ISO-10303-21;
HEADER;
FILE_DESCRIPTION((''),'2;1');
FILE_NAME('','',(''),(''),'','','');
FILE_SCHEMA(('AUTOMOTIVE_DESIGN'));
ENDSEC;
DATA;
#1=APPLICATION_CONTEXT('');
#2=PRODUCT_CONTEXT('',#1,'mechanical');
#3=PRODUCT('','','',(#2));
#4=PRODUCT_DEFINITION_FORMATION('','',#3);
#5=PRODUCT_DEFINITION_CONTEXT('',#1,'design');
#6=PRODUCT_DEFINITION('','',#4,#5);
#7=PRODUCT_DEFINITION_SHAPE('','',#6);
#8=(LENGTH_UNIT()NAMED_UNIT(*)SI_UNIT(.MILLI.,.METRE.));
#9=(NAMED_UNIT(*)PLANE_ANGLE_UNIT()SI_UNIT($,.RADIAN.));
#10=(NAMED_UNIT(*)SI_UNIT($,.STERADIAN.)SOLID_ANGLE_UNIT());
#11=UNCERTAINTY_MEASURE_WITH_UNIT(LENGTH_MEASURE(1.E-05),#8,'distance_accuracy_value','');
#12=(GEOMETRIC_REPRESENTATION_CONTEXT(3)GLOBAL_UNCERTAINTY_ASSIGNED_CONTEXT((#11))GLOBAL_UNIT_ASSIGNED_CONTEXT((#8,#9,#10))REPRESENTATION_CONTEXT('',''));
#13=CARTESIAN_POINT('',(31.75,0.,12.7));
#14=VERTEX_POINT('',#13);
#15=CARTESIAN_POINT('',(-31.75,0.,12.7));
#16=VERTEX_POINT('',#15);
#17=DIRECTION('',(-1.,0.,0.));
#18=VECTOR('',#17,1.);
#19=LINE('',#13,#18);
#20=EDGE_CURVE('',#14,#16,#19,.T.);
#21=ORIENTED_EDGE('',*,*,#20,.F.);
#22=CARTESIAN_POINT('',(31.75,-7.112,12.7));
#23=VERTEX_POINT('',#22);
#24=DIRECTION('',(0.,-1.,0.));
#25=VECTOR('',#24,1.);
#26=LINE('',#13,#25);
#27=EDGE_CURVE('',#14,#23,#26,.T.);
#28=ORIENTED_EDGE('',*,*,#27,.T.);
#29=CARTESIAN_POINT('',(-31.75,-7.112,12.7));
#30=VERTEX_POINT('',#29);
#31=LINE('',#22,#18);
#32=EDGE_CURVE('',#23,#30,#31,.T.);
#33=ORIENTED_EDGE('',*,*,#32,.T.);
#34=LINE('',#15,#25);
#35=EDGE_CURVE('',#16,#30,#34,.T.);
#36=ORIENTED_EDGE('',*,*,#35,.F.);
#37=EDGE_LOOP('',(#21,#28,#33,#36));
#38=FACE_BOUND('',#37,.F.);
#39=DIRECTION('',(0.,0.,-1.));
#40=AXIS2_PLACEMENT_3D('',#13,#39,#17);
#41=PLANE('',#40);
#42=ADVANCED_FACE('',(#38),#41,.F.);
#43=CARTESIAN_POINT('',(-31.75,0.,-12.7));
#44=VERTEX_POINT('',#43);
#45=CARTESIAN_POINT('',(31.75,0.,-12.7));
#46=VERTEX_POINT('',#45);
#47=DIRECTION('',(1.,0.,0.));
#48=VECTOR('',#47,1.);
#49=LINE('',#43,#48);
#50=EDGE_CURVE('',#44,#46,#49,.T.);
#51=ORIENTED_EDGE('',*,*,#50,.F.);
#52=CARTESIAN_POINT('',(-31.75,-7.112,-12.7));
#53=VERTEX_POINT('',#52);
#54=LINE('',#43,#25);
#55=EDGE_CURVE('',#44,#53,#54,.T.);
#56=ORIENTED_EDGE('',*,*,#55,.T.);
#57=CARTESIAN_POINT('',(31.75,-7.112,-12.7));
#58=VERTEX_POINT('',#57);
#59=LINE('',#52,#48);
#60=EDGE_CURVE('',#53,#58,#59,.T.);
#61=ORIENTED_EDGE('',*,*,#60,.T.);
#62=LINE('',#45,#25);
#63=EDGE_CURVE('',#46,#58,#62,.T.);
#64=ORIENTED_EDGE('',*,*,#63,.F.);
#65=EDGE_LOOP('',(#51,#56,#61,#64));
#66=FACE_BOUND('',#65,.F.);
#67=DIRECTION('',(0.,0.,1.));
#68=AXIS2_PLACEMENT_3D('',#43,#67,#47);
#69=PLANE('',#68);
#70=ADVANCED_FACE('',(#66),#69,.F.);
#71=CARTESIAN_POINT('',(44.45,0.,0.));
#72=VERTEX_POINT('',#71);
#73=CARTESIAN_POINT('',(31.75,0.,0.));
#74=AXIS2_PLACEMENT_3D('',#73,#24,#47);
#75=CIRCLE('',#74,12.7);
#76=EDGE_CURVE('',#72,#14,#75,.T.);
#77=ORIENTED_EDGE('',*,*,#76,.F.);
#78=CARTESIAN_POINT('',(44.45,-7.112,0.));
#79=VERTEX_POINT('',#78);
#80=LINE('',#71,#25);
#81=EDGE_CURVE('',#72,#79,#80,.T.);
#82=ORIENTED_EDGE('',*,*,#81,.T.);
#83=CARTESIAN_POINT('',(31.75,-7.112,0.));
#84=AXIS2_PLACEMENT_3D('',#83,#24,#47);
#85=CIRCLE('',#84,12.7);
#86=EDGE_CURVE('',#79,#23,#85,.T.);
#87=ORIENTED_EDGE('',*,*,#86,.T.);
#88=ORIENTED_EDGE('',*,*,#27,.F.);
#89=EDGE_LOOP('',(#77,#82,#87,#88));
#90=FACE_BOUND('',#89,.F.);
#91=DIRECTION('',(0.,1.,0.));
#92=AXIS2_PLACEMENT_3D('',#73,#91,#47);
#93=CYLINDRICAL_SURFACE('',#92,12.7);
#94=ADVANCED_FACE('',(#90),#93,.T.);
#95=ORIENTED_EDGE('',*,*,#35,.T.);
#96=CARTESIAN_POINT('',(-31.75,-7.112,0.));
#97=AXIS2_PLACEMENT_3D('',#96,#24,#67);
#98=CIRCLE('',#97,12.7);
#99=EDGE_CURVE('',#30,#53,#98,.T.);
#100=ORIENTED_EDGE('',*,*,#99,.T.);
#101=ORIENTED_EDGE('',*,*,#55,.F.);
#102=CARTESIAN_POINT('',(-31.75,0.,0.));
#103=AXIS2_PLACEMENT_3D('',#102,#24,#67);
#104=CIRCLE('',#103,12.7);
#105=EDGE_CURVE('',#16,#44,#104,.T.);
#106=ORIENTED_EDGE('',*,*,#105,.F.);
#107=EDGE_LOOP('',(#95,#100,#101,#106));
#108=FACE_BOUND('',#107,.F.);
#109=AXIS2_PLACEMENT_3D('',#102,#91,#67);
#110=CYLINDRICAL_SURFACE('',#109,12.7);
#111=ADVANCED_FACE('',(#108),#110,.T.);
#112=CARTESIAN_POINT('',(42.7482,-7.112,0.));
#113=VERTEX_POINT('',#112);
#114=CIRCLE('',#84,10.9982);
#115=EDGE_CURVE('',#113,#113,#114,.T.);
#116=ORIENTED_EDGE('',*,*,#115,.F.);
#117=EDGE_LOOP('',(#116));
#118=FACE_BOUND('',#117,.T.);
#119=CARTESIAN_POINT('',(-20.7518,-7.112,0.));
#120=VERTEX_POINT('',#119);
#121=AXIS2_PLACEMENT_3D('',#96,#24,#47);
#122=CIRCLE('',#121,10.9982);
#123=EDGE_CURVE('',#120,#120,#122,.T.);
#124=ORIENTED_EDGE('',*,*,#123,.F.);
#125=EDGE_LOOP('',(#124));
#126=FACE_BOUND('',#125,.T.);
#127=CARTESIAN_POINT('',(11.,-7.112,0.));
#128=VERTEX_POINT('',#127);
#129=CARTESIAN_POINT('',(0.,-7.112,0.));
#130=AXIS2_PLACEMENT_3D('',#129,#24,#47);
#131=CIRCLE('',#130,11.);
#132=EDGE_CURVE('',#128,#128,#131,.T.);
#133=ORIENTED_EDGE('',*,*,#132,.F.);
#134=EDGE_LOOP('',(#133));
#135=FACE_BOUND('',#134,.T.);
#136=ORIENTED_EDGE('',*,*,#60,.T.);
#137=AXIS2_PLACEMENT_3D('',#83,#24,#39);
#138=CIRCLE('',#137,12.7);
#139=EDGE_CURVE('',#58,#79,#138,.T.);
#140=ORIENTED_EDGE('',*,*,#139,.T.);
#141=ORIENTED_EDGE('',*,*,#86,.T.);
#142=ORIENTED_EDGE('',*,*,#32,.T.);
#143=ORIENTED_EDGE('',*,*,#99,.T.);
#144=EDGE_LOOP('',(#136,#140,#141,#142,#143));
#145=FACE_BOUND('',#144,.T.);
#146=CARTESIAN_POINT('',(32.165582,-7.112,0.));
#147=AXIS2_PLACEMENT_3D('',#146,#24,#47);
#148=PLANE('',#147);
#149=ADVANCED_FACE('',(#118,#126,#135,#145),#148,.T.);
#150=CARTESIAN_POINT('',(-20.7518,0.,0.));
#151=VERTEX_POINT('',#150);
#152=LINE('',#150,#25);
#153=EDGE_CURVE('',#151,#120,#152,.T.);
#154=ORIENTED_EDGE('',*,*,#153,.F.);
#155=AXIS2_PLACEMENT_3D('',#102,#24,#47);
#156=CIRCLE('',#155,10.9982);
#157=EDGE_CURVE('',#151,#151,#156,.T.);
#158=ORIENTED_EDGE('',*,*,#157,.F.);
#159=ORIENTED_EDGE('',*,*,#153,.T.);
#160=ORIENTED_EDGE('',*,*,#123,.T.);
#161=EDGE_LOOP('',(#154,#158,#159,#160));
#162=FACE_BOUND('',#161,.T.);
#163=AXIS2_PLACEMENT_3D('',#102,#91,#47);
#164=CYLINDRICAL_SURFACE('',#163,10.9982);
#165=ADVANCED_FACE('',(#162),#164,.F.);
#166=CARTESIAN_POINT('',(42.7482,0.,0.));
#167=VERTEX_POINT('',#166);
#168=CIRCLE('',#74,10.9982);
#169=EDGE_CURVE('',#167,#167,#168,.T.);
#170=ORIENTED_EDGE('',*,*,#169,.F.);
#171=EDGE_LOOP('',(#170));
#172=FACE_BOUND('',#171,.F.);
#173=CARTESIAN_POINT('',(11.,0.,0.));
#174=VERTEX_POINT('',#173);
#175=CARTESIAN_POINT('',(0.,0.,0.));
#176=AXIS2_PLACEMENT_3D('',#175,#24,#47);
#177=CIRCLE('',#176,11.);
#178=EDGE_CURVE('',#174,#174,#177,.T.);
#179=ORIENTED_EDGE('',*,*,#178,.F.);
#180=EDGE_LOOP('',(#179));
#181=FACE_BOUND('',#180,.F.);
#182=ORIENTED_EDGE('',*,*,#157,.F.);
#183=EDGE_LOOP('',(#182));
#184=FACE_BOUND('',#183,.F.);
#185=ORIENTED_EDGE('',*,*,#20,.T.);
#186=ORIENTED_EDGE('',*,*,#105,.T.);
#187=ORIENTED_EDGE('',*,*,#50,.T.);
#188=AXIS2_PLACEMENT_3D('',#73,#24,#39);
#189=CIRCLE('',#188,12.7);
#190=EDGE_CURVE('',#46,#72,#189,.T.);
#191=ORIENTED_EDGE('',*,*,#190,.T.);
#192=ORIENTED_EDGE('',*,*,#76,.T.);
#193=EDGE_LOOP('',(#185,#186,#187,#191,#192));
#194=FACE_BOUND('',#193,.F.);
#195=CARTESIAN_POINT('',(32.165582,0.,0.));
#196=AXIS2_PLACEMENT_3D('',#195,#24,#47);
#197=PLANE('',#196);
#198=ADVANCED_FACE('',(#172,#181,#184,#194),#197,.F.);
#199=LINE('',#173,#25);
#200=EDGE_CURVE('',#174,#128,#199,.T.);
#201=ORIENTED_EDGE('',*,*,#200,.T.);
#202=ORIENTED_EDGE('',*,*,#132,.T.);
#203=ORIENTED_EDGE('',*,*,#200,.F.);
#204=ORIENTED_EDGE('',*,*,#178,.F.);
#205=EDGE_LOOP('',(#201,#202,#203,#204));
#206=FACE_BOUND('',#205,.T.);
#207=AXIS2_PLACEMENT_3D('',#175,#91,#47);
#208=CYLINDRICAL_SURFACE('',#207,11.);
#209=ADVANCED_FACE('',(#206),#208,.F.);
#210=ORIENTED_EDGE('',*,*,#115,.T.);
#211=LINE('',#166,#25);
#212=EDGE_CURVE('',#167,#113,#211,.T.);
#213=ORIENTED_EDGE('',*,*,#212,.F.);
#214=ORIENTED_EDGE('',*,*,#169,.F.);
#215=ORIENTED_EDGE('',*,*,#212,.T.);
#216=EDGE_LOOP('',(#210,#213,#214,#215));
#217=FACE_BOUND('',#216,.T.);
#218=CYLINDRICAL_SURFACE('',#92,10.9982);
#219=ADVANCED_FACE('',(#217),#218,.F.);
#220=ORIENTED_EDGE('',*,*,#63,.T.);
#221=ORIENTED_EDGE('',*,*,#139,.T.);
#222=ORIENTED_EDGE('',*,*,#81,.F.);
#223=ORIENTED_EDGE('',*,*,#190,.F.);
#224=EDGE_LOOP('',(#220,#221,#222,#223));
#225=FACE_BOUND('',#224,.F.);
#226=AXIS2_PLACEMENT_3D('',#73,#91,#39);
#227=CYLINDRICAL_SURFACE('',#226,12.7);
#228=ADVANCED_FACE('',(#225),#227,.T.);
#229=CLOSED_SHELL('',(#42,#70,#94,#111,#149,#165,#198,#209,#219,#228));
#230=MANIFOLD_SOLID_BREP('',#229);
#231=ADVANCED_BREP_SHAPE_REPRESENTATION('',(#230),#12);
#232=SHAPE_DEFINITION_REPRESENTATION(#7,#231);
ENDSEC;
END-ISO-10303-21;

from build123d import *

# Parameters (mm, degrees)
F0_R     = 10.9982
F0_R_2   = 11
F1_DEPTH = 7.112


# Not quite as in the source:
# - a feature names something its author has since deleted; it is built from what else it names


with BuildPart() as f1:
    # F0 (on Front) → F1 (new body)
    with BuildSketch(Plane.XZ):
        with BuildLine():
            ThreePointArc((44.45, 0), (40.7302561211, 8.9802561211), (31.75, 12.7))
            ThreePointArc((31.75, 12.7), (19.05, 0), (31.75, -12.7))
            ThreePointArc((31.75, -12.7), (40.7302561211, -8.9802561211), (44.45, 0))
        make_face()
        with Locations((31.75, 0)):
            Circle(F0_R, mode=Mode.SUBTRACT)
        with BuildLine():
            ThreePointArc((-31.75, -12.7), (-22.7697438789, -8.9802561211), (-19.05, 0))
            ThreePointArc((-19.05, 0), (-22.7697438789, 8.9802561211), (-31.75, 12.7))
            ThreePointArc((-31.75, 12.7), (-44.45, 0), (-31.75, -12.7))
        make_face()
        with Locations((-31.75, 0)):
            Circle(F0_R, mode=Mode.SUBTRACT)
        with BuildLine():
            ThreePointArc((-31.75, 12.7), (-22.7697438789, 8.9802561211), (-19.05, 0))
            ThreePointArc((-19.05, 0), (-22.7697438789, -8.9802561211), (-31.75, -12.7))
            Line((-31.75, -12.7), (31.75, -12.7))
            ThreePointArc((31.75, -12.7), (19.05, 0), (31.75, 12.7))
            Line((31.75, 12.7), (-31.75, 12.7))
        make_face()
        Circle(F0_R_2, mode=Mode.SUBTRACT)
    extrude(amount=F1_DEPTH)


solid = f1.part
